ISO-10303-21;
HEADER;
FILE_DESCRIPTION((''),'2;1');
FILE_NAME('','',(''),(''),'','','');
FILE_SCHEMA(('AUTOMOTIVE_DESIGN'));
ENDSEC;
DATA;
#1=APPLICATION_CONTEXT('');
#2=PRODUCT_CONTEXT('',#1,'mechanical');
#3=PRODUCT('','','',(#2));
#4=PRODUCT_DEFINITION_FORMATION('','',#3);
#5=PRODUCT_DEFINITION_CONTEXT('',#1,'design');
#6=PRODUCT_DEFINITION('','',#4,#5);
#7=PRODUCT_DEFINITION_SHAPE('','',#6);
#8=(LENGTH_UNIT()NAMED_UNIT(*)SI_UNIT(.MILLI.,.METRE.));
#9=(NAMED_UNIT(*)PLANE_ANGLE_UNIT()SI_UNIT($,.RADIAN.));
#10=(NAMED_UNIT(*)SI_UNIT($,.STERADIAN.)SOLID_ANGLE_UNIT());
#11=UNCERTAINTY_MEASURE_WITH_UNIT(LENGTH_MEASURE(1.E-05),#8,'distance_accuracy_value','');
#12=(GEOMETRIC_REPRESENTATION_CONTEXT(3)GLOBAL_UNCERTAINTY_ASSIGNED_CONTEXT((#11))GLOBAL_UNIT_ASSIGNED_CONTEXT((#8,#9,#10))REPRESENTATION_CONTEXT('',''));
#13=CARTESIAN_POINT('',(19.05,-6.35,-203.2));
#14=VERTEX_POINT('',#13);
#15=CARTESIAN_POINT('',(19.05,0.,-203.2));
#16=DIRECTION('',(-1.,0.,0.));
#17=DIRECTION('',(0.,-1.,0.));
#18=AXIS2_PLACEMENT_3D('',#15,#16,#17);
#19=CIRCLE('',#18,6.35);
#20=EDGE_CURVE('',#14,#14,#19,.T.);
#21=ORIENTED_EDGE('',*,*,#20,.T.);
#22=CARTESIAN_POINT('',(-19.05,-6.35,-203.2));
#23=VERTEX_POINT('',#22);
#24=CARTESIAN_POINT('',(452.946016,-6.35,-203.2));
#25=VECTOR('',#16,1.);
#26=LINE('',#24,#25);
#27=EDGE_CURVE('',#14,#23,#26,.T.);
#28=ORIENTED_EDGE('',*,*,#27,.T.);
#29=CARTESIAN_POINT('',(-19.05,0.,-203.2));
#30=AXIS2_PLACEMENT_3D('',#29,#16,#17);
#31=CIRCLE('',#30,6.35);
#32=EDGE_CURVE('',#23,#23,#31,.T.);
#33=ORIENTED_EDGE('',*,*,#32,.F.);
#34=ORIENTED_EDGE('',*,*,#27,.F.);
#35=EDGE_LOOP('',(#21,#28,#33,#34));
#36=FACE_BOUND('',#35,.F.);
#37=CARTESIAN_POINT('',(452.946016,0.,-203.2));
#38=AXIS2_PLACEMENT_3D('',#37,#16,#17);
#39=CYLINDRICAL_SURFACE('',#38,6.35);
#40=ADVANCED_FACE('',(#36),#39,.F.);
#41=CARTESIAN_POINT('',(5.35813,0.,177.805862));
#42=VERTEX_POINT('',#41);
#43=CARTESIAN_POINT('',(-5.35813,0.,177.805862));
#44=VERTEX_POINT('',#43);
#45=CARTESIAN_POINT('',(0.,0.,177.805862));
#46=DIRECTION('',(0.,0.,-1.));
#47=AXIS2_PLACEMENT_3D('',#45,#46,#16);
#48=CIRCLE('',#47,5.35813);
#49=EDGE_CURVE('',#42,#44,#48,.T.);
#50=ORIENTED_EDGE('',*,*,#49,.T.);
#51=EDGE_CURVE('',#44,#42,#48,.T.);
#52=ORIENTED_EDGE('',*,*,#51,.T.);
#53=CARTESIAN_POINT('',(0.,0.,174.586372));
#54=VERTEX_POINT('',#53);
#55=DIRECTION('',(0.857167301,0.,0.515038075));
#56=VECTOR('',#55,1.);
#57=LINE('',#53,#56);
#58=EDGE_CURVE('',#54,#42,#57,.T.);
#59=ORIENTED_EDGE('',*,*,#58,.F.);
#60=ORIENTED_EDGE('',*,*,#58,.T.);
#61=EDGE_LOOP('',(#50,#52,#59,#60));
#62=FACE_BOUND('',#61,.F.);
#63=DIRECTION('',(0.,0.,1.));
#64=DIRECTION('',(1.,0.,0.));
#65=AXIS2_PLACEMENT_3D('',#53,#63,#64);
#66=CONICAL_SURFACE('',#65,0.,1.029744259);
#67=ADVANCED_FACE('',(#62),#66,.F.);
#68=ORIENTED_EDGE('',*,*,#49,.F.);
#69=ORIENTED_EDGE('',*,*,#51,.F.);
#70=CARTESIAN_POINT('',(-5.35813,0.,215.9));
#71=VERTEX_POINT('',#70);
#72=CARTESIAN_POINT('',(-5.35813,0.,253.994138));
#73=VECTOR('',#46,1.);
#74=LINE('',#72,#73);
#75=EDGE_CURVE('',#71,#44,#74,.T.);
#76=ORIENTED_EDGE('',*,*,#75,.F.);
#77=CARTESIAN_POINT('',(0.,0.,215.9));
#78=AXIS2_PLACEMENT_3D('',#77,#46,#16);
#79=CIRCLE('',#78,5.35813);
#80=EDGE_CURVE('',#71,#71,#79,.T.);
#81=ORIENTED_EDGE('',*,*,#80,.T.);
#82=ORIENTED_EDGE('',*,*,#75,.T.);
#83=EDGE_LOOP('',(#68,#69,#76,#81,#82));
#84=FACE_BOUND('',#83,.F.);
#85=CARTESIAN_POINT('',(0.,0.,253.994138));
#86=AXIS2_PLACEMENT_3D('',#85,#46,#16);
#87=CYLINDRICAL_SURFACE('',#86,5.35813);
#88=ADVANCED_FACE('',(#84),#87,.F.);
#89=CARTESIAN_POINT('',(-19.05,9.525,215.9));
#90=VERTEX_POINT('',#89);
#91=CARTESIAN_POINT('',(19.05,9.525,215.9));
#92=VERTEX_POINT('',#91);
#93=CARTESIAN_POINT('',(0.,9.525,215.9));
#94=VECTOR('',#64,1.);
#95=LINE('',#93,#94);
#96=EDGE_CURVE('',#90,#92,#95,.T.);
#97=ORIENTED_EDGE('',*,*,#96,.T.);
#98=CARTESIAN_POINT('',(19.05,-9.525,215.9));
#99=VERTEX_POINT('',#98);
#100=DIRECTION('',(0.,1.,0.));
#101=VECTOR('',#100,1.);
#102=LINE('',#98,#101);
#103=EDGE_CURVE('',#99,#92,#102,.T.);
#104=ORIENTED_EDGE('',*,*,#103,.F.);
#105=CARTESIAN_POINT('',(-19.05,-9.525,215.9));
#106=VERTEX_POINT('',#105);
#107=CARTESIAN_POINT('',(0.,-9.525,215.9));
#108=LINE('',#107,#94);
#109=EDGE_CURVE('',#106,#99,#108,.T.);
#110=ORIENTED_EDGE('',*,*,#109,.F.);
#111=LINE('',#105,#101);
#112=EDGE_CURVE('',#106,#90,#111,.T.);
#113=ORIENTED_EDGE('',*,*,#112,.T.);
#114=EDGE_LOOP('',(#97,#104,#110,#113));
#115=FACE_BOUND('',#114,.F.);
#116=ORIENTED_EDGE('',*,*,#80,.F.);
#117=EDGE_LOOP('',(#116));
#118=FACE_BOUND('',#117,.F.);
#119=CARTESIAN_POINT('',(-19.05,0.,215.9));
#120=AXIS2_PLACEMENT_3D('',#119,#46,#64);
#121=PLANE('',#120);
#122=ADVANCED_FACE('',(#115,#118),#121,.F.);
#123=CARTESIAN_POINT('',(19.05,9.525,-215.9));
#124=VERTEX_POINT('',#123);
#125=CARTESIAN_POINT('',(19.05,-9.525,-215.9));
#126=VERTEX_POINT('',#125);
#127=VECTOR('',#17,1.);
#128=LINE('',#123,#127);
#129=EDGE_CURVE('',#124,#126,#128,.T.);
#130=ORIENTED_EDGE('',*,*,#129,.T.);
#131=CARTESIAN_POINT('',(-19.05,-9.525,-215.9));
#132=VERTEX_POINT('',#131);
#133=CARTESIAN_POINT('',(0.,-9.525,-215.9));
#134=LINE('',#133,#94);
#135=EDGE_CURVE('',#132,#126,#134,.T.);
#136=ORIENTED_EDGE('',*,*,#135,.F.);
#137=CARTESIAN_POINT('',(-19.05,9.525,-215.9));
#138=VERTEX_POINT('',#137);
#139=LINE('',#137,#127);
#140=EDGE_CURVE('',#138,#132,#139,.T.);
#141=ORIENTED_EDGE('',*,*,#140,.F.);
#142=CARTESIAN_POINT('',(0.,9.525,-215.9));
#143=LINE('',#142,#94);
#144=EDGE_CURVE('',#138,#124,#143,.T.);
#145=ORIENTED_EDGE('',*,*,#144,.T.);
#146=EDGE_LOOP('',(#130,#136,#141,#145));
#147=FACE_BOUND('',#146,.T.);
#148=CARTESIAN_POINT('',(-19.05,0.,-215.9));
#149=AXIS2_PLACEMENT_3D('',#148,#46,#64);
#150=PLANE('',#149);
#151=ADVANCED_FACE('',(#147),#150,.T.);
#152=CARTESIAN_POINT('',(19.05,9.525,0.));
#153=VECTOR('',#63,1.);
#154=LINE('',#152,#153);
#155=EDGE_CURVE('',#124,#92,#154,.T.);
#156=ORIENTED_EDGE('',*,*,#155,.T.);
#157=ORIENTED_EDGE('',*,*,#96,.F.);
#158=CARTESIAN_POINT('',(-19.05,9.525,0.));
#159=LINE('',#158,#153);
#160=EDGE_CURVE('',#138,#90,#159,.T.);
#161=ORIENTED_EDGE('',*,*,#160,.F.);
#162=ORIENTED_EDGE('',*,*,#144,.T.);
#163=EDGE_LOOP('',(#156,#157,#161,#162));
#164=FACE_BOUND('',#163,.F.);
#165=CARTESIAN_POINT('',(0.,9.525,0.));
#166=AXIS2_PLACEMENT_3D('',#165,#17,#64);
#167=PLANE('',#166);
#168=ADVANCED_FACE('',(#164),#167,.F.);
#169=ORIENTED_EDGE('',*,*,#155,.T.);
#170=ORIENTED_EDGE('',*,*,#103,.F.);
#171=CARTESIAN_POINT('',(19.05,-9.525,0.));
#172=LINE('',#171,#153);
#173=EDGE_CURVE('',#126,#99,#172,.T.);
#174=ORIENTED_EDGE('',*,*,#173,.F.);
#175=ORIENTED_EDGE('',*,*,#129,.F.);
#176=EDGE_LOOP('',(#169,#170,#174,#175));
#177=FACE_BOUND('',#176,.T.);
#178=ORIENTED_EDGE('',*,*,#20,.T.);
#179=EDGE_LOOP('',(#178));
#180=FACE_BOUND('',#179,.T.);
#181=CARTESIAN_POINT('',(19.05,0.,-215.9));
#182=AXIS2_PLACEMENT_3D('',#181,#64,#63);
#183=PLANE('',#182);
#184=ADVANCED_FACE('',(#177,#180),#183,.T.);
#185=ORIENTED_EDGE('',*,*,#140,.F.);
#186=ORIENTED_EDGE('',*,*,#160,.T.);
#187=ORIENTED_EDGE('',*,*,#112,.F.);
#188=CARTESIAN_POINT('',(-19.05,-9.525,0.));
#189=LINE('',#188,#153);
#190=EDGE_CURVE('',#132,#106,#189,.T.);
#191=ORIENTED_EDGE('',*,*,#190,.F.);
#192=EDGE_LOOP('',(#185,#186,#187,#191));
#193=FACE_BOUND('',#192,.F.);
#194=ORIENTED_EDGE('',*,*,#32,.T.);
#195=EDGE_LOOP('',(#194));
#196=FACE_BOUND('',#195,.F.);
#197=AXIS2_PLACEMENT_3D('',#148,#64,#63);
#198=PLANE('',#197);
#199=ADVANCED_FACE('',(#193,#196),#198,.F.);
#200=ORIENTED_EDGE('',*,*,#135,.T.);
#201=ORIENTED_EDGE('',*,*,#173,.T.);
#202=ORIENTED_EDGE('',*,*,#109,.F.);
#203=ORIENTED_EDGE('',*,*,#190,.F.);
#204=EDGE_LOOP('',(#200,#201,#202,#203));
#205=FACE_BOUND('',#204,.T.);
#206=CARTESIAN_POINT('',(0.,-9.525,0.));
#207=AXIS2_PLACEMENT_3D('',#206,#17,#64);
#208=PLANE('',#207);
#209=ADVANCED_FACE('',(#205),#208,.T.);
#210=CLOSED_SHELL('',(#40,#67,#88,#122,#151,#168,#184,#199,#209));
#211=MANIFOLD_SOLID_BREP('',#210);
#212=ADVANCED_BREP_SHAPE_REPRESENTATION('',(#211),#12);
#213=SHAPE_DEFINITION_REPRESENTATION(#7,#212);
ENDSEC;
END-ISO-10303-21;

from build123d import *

# Parameters (mm, degrees)
F0_W     = 38.1
F0_H     = 431.8
F1_DEPTH = 9.525
F3_D     = 12.7
F5_D     = 10.71626
F5_DEPTH = 38.0941384615
F5_TIP   = 3.2194893086


# Not quite as in the source:
# - a length typed as a fraction of an inch, garbled in the dataset ("3 / 203.2 mm" for 3/8 in), is restored


with BuildPart() as f1:
    # F0 (on Front) → F1 (new body, symmetric)
    with BuildSketch(Plane.XZ):
        Rectangle(F0_W, F0_H)
    extrude(amount=F1_DEPTH, both=True)

    # F3 (through all)
    with Locations(Plane.YZ.offset(19.05)):
        with Locations((0, -203.2)):
            Hole(F3_D / 2)

    # F5
    with Locations(Plane.XY.offset(215.9)):
        with Locations((0, 0)):
            Hole(F5_D / 2, depth=F5_DEPTH)
            with Locations((0, 0, -(F5_DEPTH + F5_TIP / 2))):  # 118° drill point
                Cone(0, F5_D / 2, F5_TIP, mode=Mode.SUBTRACT)


solid = f1.part
